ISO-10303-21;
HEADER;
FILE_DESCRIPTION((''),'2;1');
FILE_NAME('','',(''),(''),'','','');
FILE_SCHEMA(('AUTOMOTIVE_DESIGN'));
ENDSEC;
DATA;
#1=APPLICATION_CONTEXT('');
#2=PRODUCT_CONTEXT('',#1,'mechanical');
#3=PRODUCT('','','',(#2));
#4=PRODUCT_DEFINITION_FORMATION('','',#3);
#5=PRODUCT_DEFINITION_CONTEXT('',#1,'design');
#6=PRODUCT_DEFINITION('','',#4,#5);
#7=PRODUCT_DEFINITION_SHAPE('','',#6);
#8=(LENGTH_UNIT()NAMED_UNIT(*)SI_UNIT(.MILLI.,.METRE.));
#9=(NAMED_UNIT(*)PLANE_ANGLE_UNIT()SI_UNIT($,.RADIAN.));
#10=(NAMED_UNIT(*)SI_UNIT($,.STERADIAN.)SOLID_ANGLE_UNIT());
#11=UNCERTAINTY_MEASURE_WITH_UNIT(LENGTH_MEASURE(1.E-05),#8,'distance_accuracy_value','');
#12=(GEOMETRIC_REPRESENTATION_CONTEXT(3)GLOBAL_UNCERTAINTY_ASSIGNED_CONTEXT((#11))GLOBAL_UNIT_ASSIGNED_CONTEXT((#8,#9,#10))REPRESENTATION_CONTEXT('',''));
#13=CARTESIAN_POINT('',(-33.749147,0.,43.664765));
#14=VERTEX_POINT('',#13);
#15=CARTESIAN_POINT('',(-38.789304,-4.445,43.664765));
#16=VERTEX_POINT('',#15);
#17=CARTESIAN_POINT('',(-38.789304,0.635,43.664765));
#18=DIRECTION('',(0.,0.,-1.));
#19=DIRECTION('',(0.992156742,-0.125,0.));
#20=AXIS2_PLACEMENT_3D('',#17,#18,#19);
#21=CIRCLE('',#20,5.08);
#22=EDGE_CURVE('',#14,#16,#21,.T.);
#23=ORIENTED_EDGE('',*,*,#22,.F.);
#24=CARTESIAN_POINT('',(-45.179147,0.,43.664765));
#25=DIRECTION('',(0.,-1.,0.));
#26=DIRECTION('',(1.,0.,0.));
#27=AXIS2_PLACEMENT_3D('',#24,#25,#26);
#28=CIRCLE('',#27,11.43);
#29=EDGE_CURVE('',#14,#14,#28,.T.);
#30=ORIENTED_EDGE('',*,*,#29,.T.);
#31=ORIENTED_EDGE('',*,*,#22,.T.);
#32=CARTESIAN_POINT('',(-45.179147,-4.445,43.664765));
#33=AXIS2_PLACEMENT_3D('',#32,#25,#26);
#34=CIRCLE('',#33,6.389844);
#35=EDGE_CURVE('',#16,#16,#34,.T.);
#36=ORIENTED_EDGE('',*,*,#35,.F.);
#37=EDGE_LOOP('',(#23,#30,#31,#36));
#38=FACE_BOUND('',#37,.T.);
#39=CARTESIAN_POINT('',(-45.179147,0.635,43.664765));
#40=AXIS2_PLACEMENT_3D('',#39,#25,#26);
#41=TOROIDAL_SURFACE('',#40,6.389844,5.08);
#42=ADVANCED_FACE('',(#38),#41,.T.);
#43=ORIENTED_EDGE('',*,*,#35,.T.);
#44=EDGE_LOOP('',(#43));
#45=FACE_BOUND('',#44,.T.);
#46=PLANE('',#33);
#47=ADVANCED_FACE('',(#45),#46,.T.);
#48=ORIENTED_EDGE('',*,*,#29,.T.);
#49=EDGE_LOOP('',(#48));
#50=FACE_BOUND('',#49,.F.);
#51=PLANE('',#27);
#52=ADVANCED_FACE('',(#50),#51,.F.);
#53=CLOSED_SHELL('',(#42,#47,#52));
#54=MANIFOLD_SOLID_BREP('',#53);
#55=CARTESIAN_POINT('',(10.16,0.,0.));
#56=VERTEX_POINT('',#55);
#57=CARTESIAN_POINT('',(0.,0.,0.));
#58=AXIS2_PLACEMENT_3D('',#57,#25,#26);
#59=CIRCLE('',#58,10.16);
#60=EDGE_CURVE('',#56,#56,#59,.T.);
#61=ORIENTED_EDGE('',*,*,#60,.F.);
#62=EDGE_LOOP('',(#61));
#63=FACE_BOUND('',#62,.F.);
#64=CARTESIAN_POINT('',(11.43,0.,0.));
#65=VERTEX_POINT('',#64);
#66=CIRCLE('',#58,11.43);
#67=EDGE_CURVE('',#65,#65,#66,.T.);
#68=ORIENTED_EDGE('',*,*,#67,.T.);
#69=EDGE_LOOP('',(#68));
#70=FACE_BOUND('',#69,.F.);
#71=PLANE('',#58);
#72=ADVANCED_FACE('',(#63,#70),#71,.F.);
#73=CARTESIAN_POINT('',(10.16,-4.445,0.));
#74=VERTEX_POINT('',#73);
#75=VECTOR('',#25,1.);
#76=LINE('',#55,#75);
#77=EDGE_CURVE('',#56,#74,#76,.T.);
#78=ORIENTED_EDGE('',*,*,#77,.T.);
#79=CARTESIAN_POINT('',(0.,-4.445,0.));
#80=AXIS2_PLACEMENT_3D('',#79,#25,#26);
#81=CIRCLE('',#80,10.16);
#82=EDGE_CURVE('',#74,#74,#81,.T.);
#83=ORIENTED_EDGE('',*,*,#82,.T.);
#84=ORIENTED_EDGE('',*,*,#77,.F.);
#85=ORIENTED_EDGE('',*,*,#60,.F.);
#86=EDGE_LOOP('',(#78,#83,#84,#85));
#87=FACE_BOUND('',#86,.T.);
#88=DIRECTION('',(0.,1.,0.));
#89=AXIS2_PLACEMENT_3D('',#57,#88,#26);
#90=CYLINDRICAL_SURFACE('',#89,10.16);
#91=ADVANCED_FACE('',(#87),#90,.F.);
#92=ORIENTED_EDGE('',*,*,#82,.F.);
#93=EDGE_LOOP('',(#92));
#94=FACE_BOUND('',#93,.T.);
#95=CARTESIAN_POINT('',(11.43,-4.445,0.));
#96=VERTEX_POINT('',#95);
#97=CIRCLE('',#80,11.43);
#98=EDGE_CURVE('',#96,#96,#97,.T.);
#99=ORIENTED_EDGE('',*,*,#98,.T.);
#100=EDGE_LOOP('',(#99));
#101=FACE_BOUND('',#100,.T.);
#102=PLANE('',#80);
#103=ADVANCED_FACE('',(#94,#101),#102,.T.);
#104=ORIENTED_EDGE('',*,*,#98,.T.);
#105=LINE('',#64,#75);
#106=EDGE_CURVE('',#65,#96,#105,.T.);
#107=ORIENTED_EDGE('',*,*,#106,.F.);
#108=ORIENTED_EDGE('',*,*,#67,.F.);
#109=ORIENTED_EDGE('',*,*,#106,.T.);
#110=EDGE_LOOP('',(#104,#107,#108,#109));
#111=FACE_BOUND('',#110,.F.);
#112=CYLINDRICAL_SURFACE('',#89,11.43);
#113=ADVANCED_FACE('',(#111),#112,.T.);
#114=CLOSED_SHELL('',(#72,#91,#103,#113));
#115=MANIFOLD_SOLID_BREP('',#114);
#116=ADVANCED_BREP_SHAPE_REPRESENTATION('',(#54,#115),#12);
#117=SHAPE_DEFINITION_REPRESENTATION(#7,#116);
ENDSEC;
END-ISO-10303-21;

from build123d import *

# Parameters (mm, degrees)
F0_R     = 11.43
F0_R_2   = 10.16
F1_DEPTH = 4.445
F2_R     = 11.43
F3_DEPTH = 4.445


# Not quite as in the source:
# - a fillet or chamfer that OpenCascade refuses, or shapes differently, is made with other operations: its cross-section is extruded or revolved along the edge and cut away or added


with BuildPart() as f1:
    # F0 (on Front) → F1 (new body)
    with BuildSketch(Plane.XZ):
        Circle(F0_R)
        Circle(F0_R_2, mode=Mode.SUBTRACT)
    extrude(amount=F1_DEPTH)


with BuildPart() as f3:
    # F2 (on Front) → F3 (new body)
    with BuildSketch(Plane.XZ):
        with Locations((-45.1791472733, 43.6647646129)):
            Circle(F2_R)
    extrude(amount=F3_DEPTH)

    # F4: fillet of radius 5.08 on 1 edges, made by hand

    # F4_s1 → F4_t2 (revolve, cut)
    with BuildSketch(Plane.XY.offset(43.6647646129)):
        with BuildLine():
            ThreePointArc((-33.7491472733, 0), (-35.4291993558, -3.175), (-38.7893035209, -4.445))
            Line((-38.7893035209, -4.445), (-33.7491472733, -4.445))
            Line((-33.7491472733, -4.445), (-33.7491472733, 0))
        make_face()
    revolve(axis=Axis((-45.1791472733, -4.445, 43.6647646129), (0, -1, 0)), mode=Mode.SUBTRACT)


solid = Compound([f1.part, f3.part])
